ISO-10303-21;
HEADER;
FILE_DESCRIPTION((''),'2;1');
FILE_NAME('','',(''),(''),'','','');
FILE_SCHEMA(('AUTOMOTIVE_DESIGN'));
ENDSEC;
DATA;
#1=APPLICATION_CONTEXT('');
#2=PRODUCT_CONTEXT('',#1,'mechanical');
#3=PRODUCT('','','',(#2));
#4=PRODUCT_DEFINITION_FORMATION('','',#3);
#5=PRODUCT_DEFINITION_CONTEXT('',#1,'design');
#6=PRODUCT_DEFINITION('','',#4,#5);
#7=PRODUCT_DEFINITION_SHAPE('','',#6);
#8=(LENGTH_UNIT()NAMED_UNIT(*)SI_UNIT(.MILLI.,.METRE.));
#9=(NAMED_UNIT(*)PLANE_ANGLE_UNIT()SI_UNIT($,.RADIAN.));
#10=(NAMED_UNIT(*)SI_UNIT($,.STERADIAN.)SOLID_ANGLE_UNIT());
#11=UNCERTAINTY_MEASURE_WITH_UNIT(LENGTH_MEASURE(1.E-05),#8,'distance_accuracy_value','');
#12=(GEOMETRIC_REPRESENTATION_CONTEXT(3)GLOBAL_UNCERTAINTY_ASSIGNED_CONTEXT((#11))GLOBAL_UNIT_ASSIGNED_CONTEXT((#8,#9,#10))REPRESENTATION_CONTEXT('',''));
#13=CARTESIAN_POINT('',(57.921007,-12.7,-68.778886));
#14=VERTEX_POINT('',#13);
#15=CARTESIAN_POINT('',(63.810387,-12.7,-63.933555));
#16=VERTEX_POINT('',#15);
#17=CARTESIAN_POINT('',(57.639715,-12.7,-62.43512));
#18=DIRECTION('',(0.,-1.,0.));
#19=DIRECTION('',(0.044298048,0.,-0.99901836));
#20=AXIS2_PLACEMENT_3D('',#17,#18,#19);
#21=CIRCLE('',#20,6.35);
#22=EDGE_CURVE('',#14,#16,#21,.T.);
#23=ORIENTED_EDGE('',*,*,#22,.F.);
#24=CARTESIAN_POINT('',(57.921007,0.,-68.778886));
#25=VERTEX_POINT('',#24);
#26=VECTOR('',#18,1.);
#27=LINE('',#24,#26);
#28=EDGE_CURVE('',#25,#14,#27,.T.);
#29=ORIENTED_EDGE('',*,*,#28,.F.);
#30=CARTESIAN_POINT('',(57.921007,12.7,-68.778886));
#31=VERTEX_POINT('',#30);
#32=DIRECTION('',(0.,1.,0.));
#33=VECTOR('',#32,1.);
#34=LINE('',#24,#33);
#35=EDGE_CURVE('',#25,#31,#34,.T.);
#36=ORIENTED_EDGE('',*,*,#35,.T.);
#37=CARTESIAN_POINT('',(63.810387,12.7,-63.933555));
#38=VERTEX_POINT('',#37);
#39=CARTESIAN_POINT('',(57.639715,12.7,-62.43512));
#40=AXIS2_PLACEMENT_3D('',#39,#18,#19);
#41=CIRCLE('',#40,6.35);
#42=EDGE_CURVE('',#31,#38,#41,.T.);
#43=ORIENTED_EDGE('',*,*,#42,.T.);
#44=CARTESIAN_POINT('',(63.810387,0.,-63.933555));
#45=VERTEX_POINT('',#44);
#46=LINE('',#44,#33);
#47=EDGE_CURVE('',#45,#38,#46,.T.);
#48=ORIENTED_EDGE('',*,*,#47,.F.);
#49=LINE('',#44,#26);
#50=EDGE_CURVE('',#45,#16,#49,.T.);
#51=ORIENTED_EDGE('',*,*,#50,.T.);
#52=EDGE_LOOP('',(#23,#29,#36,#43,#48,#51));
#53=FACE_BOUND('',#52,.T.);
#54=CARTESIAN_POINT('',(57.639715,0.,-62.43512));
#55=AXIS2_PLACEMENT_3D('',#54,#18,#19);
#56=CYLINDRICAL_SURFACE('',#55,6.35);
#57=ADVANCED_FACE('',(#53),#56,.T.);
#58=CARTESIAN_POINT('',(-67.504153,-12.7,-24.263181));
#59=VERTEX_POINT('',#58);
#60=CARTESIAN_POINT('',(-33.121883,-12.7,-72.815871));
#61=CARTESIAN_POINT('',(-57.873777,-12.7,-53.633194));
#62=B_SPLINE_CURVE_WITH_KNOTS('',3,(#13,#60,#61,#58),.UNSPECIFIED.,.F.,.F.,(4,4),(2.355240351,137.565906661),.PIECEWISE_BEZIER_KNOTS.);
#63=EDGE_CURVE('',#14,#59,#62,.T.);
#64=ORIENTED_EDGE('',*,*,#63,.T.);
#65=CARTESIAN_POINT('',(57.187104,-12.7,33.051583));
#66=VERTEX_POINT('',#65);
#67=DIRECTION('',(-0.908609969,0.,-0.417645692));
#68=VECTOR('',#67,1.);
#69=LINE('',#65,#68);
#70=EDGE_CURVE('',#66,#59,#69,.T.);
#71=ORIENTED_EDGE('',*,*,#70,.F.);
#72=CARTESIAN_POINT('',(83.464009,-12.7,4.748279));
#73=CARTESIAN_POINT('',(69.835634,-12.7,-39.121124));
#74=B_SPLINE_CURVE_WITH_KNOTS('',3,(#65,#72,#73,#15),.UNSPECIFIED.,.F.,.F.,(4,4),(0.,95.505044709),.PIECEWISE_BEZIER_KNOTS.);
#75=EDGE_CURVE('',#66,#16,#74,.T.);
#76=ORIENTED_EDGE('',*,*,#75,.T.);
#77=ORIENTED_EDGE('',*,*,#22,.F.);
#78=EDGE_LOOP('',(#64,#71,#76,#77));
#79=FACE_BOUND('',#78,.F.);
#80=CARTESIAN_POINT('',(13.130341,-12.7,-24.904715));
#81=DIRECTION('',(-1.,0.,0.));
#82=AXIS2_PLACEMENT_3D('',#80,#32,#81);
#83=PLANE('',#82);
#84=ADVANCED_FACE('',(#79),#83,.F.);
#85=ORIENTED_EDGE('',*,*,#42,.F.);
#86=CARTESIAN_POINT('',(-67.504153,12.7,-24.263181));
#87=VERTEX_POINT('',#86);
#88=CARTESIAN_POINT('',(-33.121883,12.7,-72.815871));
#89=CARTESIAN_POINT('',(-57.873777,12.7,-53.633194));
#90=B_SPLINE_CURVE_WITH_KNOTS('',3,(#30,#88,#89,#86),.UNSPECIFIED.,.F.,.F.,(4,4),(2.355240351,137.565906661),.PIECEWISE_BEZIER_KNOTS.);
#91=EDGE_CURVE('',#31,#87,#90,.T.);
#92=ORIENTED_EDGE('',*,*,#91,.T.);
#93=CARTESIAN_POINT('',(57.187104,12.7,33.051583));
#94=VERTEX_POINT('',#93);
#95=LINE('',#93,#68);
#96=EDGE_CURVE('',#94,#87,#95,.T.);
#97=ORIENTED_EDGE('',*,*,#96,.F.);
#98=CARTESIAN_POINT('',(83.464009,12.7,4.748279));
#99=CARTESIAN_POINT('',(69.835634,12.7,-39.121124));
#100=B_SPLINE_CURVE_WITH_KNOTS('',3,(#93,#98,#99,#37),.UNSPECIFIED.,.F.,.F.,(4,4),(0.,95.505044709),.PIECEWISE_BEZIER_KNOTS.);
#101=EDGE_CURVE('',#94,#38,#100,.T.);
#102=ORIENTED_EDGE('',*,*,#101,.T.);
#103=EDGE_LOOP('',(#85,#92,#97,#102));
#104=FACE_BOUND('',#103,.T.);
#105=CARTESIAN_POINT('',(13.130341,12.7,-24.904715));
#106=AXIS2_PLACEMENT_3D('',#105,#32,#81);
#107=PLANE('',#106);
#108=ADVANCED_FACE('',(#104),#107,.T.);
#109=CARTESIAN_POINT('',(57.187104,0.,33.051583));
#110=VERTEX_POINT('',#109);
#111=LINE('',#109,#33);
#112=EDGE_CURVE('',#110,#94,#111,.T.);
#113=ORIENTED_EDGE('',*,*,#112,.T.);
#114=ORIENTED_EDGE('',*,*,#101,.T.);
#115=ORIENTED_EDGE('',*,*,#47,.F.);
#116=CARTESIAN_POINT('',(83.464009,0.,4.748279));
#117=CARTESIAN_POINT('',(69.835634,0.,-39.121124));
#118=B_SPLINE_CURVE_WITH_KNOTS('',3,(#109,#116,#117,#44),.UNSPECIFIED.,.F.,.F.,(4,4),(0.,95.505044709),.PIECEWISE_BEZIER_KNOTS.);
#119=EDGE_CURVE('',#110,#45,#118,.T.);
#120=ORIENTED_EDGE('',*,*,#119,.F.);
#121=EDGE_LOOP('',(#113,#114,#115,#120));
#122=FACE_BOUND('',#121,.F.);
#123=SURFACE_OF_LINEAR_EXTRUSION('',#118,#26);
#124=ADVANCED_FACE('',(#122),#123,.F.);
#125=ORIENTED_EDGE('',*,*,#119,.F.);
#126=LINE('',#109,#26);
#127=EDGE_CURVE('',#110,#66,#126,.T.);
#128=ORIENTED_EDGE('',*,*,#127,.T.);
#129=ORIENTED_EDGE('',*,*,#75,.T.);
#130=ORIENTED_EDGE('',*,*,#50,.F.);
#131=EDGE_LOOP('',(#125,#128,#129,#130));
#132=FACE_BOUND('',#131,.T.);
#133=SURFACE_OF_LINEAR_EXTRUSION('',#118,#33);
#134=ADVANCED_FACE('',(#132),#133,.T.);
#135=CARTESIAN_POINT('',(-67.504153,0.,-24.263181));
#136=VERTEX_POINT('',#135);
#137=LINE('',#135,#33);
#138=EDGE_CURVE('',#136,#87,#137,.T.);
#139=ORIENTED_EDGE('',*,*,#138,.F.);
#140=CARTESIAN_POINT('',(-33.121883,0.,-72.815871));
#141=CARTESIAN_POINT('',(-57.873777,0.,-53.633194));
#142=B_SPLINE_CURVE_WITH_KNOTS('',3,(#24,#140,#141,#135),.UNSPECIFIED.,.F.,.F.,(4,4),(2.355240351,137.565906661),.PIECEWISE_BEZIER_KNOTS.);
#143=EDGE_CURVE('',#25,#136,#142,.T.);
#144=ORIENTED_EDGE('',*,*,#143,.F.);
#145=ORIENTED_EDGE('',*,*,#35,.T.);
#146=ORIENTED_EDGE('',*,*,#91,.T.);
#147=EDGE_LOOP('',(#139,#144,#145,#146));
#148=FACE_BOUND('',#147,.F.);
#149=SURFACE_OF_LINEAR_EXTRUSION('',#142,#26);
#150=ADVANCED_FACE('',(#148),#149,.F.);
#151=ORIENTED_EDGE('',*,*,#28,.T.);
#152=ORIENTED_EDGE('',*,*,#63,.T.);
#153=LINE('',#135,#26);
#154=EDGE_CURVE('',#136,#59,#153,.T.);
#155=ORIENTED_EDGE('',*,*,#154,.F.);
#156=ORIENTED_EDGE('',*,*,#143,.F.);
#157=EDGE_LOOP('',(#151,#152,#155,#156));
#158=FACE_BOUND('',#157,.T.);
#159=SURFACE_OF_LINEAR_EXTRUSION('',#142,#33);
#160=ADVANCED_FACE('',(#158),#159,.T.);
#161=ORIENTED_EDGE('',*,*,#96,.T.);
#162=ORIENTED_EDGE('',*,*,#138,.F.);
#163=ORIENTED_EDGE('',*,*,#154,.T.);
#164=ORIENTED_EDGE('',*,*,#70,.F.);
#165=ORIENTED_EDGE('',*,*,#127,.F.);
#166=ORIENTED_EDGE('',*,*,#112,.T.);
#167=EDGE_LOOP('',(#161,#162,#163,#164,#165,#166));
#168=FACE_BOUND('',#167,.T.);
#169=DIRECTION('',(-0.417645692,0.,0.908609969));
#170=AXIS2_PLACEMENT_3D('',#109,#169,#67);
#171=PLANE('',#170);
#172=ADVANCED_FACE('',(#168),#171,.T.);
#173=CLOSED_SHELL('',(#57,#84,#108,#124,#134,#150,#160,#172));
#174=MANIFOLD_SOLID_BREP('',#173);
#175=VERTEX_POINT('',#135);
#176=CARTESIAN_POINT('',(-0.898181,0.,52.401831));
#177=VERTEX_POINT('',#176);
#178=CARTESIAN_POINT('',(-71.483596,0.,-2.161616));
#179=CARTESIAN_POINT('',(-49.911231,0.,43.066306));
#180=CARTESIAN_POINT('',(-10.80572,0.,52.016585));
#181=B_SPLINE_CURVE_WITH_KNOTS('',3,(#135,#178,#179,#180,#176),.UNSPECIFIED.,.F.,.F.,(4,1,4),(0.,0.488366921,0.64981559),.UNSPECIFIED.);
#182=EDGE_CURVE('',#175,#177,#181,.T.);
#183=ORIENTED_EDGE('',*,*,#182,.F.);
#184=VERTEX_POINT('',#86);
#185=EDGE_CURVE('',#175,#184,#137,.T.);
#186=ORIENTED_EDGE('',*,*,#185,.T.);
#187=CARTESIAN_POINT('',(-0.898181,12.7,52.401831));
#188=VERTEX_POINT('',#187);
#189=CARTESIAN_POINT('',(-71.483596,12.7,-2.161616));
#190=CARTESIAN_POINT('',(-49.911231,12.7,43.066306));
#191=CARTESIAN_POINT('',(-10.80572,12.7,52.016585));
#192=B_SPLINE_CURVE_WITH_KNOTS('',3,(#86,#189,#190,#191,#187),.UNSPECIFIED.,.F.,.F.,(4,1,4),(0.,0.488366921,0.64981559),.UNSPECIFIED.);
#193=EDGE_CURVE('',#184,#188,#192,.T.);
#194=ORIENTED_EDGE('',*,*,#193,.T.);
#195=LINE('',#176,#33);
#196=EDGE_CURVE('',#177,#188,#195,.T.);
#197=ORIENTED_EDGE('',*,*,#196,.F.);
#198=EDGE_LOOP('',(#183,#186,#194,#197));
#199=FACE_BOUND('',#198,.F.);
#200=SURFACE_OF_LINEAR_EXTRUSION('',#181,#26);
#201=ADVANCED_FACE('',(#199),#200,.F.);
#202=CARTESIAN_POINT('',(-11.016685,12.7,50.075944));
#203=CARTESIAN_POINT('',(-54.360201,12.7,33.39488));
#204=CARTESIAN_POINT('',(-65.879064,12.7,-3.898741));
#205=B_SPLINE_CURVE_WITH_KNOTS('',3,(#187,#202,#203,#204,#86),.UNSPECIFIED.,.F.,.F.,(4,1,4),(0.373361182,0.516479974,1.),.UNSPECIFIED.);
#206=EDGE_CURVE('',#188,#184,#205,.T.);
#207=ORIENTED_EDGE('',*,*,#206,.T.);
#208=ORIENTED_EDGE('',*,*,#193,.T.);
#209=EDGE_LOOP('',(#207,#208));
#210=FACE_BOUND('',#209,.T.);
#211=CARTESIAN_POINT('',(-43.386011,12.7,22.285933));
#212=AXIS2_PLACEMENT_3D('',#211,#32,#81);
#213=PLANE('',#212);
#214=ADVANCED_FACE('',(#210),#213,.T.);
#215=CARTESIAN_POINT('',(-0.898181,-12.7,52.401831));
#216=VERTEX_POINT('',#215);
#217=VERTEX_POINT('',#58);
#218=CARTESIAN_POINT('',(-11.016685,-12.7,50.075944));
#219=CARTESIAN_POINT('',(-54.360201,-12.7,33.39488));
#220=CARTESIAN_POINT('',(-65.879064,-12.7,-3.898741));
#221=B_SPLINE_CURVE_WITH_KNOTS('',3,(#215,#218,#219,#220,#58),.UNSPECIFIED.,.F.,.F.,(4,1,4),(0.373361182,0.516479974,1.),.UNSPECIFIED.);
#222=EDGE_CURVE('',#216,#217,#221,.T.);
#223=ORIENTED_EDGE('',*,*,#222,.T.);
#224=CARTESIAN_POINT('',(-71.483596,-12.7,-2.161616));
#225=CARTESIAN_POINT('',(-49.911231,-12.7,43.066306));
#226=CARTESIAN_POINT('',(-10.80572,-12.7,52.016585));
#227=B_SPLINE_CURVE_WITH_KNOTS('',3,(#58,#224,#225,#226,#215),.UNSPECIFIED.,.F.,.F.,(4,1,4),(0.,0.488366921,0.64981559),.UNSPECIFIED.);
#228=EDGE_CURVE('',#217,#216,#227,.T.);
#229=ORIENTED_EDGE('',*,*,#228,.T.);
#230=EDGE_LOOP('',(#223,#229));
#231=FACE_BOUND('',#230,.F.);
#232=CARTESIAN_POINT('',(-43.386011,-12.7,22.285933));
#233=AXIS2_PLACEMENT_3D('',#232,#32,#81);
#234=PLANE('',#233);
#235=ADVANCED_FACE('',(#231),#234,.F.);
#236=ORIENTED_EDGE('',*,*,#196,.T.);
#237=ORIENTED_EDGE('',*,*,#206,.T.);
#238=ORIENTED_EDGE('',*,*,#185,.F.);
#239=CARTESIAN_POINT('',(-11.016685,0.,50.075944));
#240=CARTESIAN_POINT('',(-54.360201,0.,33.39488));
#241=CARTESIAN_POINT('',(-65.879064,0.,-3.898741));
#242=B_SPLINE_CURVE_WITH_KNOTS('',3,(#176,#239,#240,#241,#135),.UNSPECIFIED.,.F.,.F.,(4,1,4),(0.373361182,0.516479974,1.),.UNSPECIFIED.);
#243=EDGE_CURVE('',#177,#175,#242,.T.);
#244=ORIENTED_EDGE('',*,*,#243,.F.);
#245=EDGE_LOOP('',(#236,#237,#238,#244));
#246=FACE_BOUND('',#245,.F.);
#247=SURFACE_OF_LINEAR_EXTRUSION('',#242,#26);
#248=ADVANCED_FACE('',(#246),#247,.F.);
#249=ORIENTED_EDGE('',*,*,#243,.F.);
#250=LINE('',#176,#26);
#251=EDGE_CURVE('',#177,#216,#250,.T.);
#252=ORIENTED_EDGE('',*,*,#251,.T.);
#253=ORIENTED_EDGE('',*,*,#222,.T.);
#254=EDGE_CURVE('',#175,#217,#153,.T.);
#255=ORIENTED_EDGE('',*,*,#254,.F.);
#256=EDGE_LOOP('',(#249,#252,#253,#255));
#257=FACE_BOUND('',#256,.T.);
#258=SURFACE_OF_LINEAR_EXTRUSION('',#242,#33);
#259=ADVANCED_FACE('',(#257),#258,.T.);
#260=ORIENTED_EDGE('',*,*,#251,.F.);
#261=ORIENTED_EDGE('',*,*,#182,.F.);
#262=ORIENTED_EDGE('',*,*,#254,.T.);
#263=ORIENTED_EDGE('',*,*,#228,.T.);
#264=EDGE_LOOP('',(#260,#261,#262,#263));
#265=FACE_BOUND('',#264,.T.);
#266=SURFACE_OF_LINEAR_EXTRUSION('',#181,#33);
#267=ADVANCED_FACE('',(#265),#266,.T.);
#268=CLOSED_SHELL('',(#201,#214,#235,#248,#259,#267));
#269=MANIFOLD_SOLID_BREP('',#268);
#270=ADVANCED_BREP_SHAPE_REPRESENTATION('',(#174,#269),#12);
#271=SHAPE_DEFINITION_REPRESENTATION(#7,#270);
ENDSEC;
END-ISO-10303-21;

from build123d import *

# Parameters (mm, degrees)
F1_DEPTH = 12.7


with BuildPart() as f1:
    # F0 (on Front) → F1 (new body, symmetric)
    with BuildSketch(Plane.XZ):
        with BuildLine():
            add(Edge.make_bspline(
                [(57.1871035576, 33.0515832115), (83.4640090894, 4.7482788241), (69.8356338221, -39.121123681), (63.8103867226, -63.9335548477)],
                knots=[0, 0, 0, 0, 95.5050447095, 95.5050447095, 95.5050447095, 95.5050447095], degree=3))
            Line((57.1871035576, 33.0515832115), (-67.5041534908, -24.2631812721))
            add(Edge.make_bspline(
                [(57.9210074343, -68.7788861237), (-33.1218832719, -72.8158713516), (-57.8737772663, -53.6331943002), (-67.5041534908, -24.2631812721)],
                knots=[2.3552403512, 2.3552403512, 2.3552403512, 2.3552403512, 137.5659066611, 137.5659066611, 137.5659066611, 137.5659066611], degree=3))
            ThreePointArc((57.9210074343, -68.7788861237), (61.6741008128, -67.3388150573), (63.8103867226, -63.9335548477))
        make_face()
    extrude(amount=F1_DEPTH, both=True)


with BuildPart() as f1b:
    # F0 (on Front) → F1, piece 2 (new body, symmetric)
    with BuildSketch(Plane.XZ):
        with BuildLine():
            add(Edge.make_bspline(
                [(-0.8981807459, 52.4018313512), (-11.0166847084, 50.0759443022), (-54.3602010989, 33.3948801257), (-65.879063599, -3.8987406946), (-67.5041534908, -24.2631812721)],
                knots=[0.3733611821, 0.3733611821, 0.3733611821, 0.3733611821, 0.5164799744, 1, 1, 1, 1], degree=3))
            add(Edge.make_bspline(
                [(-67.5041534908, -24.2631812721), (-71.4835964909, -2.1616155462), (-49.9112308582, 43.0663063494), (-10.8057204253, 52.0165849428), (-0.8981807459, 52.4018313512)],
                knots=[0, 0, 0, 0, 0.488366921, 0.64981559, 0.64981559, 0.64981559, 0.64981559], degree=3))
        make_face()
    extrude(amount=F1_DEPTH, both=True)


solid = Compound([f1.part, f1b.part])
